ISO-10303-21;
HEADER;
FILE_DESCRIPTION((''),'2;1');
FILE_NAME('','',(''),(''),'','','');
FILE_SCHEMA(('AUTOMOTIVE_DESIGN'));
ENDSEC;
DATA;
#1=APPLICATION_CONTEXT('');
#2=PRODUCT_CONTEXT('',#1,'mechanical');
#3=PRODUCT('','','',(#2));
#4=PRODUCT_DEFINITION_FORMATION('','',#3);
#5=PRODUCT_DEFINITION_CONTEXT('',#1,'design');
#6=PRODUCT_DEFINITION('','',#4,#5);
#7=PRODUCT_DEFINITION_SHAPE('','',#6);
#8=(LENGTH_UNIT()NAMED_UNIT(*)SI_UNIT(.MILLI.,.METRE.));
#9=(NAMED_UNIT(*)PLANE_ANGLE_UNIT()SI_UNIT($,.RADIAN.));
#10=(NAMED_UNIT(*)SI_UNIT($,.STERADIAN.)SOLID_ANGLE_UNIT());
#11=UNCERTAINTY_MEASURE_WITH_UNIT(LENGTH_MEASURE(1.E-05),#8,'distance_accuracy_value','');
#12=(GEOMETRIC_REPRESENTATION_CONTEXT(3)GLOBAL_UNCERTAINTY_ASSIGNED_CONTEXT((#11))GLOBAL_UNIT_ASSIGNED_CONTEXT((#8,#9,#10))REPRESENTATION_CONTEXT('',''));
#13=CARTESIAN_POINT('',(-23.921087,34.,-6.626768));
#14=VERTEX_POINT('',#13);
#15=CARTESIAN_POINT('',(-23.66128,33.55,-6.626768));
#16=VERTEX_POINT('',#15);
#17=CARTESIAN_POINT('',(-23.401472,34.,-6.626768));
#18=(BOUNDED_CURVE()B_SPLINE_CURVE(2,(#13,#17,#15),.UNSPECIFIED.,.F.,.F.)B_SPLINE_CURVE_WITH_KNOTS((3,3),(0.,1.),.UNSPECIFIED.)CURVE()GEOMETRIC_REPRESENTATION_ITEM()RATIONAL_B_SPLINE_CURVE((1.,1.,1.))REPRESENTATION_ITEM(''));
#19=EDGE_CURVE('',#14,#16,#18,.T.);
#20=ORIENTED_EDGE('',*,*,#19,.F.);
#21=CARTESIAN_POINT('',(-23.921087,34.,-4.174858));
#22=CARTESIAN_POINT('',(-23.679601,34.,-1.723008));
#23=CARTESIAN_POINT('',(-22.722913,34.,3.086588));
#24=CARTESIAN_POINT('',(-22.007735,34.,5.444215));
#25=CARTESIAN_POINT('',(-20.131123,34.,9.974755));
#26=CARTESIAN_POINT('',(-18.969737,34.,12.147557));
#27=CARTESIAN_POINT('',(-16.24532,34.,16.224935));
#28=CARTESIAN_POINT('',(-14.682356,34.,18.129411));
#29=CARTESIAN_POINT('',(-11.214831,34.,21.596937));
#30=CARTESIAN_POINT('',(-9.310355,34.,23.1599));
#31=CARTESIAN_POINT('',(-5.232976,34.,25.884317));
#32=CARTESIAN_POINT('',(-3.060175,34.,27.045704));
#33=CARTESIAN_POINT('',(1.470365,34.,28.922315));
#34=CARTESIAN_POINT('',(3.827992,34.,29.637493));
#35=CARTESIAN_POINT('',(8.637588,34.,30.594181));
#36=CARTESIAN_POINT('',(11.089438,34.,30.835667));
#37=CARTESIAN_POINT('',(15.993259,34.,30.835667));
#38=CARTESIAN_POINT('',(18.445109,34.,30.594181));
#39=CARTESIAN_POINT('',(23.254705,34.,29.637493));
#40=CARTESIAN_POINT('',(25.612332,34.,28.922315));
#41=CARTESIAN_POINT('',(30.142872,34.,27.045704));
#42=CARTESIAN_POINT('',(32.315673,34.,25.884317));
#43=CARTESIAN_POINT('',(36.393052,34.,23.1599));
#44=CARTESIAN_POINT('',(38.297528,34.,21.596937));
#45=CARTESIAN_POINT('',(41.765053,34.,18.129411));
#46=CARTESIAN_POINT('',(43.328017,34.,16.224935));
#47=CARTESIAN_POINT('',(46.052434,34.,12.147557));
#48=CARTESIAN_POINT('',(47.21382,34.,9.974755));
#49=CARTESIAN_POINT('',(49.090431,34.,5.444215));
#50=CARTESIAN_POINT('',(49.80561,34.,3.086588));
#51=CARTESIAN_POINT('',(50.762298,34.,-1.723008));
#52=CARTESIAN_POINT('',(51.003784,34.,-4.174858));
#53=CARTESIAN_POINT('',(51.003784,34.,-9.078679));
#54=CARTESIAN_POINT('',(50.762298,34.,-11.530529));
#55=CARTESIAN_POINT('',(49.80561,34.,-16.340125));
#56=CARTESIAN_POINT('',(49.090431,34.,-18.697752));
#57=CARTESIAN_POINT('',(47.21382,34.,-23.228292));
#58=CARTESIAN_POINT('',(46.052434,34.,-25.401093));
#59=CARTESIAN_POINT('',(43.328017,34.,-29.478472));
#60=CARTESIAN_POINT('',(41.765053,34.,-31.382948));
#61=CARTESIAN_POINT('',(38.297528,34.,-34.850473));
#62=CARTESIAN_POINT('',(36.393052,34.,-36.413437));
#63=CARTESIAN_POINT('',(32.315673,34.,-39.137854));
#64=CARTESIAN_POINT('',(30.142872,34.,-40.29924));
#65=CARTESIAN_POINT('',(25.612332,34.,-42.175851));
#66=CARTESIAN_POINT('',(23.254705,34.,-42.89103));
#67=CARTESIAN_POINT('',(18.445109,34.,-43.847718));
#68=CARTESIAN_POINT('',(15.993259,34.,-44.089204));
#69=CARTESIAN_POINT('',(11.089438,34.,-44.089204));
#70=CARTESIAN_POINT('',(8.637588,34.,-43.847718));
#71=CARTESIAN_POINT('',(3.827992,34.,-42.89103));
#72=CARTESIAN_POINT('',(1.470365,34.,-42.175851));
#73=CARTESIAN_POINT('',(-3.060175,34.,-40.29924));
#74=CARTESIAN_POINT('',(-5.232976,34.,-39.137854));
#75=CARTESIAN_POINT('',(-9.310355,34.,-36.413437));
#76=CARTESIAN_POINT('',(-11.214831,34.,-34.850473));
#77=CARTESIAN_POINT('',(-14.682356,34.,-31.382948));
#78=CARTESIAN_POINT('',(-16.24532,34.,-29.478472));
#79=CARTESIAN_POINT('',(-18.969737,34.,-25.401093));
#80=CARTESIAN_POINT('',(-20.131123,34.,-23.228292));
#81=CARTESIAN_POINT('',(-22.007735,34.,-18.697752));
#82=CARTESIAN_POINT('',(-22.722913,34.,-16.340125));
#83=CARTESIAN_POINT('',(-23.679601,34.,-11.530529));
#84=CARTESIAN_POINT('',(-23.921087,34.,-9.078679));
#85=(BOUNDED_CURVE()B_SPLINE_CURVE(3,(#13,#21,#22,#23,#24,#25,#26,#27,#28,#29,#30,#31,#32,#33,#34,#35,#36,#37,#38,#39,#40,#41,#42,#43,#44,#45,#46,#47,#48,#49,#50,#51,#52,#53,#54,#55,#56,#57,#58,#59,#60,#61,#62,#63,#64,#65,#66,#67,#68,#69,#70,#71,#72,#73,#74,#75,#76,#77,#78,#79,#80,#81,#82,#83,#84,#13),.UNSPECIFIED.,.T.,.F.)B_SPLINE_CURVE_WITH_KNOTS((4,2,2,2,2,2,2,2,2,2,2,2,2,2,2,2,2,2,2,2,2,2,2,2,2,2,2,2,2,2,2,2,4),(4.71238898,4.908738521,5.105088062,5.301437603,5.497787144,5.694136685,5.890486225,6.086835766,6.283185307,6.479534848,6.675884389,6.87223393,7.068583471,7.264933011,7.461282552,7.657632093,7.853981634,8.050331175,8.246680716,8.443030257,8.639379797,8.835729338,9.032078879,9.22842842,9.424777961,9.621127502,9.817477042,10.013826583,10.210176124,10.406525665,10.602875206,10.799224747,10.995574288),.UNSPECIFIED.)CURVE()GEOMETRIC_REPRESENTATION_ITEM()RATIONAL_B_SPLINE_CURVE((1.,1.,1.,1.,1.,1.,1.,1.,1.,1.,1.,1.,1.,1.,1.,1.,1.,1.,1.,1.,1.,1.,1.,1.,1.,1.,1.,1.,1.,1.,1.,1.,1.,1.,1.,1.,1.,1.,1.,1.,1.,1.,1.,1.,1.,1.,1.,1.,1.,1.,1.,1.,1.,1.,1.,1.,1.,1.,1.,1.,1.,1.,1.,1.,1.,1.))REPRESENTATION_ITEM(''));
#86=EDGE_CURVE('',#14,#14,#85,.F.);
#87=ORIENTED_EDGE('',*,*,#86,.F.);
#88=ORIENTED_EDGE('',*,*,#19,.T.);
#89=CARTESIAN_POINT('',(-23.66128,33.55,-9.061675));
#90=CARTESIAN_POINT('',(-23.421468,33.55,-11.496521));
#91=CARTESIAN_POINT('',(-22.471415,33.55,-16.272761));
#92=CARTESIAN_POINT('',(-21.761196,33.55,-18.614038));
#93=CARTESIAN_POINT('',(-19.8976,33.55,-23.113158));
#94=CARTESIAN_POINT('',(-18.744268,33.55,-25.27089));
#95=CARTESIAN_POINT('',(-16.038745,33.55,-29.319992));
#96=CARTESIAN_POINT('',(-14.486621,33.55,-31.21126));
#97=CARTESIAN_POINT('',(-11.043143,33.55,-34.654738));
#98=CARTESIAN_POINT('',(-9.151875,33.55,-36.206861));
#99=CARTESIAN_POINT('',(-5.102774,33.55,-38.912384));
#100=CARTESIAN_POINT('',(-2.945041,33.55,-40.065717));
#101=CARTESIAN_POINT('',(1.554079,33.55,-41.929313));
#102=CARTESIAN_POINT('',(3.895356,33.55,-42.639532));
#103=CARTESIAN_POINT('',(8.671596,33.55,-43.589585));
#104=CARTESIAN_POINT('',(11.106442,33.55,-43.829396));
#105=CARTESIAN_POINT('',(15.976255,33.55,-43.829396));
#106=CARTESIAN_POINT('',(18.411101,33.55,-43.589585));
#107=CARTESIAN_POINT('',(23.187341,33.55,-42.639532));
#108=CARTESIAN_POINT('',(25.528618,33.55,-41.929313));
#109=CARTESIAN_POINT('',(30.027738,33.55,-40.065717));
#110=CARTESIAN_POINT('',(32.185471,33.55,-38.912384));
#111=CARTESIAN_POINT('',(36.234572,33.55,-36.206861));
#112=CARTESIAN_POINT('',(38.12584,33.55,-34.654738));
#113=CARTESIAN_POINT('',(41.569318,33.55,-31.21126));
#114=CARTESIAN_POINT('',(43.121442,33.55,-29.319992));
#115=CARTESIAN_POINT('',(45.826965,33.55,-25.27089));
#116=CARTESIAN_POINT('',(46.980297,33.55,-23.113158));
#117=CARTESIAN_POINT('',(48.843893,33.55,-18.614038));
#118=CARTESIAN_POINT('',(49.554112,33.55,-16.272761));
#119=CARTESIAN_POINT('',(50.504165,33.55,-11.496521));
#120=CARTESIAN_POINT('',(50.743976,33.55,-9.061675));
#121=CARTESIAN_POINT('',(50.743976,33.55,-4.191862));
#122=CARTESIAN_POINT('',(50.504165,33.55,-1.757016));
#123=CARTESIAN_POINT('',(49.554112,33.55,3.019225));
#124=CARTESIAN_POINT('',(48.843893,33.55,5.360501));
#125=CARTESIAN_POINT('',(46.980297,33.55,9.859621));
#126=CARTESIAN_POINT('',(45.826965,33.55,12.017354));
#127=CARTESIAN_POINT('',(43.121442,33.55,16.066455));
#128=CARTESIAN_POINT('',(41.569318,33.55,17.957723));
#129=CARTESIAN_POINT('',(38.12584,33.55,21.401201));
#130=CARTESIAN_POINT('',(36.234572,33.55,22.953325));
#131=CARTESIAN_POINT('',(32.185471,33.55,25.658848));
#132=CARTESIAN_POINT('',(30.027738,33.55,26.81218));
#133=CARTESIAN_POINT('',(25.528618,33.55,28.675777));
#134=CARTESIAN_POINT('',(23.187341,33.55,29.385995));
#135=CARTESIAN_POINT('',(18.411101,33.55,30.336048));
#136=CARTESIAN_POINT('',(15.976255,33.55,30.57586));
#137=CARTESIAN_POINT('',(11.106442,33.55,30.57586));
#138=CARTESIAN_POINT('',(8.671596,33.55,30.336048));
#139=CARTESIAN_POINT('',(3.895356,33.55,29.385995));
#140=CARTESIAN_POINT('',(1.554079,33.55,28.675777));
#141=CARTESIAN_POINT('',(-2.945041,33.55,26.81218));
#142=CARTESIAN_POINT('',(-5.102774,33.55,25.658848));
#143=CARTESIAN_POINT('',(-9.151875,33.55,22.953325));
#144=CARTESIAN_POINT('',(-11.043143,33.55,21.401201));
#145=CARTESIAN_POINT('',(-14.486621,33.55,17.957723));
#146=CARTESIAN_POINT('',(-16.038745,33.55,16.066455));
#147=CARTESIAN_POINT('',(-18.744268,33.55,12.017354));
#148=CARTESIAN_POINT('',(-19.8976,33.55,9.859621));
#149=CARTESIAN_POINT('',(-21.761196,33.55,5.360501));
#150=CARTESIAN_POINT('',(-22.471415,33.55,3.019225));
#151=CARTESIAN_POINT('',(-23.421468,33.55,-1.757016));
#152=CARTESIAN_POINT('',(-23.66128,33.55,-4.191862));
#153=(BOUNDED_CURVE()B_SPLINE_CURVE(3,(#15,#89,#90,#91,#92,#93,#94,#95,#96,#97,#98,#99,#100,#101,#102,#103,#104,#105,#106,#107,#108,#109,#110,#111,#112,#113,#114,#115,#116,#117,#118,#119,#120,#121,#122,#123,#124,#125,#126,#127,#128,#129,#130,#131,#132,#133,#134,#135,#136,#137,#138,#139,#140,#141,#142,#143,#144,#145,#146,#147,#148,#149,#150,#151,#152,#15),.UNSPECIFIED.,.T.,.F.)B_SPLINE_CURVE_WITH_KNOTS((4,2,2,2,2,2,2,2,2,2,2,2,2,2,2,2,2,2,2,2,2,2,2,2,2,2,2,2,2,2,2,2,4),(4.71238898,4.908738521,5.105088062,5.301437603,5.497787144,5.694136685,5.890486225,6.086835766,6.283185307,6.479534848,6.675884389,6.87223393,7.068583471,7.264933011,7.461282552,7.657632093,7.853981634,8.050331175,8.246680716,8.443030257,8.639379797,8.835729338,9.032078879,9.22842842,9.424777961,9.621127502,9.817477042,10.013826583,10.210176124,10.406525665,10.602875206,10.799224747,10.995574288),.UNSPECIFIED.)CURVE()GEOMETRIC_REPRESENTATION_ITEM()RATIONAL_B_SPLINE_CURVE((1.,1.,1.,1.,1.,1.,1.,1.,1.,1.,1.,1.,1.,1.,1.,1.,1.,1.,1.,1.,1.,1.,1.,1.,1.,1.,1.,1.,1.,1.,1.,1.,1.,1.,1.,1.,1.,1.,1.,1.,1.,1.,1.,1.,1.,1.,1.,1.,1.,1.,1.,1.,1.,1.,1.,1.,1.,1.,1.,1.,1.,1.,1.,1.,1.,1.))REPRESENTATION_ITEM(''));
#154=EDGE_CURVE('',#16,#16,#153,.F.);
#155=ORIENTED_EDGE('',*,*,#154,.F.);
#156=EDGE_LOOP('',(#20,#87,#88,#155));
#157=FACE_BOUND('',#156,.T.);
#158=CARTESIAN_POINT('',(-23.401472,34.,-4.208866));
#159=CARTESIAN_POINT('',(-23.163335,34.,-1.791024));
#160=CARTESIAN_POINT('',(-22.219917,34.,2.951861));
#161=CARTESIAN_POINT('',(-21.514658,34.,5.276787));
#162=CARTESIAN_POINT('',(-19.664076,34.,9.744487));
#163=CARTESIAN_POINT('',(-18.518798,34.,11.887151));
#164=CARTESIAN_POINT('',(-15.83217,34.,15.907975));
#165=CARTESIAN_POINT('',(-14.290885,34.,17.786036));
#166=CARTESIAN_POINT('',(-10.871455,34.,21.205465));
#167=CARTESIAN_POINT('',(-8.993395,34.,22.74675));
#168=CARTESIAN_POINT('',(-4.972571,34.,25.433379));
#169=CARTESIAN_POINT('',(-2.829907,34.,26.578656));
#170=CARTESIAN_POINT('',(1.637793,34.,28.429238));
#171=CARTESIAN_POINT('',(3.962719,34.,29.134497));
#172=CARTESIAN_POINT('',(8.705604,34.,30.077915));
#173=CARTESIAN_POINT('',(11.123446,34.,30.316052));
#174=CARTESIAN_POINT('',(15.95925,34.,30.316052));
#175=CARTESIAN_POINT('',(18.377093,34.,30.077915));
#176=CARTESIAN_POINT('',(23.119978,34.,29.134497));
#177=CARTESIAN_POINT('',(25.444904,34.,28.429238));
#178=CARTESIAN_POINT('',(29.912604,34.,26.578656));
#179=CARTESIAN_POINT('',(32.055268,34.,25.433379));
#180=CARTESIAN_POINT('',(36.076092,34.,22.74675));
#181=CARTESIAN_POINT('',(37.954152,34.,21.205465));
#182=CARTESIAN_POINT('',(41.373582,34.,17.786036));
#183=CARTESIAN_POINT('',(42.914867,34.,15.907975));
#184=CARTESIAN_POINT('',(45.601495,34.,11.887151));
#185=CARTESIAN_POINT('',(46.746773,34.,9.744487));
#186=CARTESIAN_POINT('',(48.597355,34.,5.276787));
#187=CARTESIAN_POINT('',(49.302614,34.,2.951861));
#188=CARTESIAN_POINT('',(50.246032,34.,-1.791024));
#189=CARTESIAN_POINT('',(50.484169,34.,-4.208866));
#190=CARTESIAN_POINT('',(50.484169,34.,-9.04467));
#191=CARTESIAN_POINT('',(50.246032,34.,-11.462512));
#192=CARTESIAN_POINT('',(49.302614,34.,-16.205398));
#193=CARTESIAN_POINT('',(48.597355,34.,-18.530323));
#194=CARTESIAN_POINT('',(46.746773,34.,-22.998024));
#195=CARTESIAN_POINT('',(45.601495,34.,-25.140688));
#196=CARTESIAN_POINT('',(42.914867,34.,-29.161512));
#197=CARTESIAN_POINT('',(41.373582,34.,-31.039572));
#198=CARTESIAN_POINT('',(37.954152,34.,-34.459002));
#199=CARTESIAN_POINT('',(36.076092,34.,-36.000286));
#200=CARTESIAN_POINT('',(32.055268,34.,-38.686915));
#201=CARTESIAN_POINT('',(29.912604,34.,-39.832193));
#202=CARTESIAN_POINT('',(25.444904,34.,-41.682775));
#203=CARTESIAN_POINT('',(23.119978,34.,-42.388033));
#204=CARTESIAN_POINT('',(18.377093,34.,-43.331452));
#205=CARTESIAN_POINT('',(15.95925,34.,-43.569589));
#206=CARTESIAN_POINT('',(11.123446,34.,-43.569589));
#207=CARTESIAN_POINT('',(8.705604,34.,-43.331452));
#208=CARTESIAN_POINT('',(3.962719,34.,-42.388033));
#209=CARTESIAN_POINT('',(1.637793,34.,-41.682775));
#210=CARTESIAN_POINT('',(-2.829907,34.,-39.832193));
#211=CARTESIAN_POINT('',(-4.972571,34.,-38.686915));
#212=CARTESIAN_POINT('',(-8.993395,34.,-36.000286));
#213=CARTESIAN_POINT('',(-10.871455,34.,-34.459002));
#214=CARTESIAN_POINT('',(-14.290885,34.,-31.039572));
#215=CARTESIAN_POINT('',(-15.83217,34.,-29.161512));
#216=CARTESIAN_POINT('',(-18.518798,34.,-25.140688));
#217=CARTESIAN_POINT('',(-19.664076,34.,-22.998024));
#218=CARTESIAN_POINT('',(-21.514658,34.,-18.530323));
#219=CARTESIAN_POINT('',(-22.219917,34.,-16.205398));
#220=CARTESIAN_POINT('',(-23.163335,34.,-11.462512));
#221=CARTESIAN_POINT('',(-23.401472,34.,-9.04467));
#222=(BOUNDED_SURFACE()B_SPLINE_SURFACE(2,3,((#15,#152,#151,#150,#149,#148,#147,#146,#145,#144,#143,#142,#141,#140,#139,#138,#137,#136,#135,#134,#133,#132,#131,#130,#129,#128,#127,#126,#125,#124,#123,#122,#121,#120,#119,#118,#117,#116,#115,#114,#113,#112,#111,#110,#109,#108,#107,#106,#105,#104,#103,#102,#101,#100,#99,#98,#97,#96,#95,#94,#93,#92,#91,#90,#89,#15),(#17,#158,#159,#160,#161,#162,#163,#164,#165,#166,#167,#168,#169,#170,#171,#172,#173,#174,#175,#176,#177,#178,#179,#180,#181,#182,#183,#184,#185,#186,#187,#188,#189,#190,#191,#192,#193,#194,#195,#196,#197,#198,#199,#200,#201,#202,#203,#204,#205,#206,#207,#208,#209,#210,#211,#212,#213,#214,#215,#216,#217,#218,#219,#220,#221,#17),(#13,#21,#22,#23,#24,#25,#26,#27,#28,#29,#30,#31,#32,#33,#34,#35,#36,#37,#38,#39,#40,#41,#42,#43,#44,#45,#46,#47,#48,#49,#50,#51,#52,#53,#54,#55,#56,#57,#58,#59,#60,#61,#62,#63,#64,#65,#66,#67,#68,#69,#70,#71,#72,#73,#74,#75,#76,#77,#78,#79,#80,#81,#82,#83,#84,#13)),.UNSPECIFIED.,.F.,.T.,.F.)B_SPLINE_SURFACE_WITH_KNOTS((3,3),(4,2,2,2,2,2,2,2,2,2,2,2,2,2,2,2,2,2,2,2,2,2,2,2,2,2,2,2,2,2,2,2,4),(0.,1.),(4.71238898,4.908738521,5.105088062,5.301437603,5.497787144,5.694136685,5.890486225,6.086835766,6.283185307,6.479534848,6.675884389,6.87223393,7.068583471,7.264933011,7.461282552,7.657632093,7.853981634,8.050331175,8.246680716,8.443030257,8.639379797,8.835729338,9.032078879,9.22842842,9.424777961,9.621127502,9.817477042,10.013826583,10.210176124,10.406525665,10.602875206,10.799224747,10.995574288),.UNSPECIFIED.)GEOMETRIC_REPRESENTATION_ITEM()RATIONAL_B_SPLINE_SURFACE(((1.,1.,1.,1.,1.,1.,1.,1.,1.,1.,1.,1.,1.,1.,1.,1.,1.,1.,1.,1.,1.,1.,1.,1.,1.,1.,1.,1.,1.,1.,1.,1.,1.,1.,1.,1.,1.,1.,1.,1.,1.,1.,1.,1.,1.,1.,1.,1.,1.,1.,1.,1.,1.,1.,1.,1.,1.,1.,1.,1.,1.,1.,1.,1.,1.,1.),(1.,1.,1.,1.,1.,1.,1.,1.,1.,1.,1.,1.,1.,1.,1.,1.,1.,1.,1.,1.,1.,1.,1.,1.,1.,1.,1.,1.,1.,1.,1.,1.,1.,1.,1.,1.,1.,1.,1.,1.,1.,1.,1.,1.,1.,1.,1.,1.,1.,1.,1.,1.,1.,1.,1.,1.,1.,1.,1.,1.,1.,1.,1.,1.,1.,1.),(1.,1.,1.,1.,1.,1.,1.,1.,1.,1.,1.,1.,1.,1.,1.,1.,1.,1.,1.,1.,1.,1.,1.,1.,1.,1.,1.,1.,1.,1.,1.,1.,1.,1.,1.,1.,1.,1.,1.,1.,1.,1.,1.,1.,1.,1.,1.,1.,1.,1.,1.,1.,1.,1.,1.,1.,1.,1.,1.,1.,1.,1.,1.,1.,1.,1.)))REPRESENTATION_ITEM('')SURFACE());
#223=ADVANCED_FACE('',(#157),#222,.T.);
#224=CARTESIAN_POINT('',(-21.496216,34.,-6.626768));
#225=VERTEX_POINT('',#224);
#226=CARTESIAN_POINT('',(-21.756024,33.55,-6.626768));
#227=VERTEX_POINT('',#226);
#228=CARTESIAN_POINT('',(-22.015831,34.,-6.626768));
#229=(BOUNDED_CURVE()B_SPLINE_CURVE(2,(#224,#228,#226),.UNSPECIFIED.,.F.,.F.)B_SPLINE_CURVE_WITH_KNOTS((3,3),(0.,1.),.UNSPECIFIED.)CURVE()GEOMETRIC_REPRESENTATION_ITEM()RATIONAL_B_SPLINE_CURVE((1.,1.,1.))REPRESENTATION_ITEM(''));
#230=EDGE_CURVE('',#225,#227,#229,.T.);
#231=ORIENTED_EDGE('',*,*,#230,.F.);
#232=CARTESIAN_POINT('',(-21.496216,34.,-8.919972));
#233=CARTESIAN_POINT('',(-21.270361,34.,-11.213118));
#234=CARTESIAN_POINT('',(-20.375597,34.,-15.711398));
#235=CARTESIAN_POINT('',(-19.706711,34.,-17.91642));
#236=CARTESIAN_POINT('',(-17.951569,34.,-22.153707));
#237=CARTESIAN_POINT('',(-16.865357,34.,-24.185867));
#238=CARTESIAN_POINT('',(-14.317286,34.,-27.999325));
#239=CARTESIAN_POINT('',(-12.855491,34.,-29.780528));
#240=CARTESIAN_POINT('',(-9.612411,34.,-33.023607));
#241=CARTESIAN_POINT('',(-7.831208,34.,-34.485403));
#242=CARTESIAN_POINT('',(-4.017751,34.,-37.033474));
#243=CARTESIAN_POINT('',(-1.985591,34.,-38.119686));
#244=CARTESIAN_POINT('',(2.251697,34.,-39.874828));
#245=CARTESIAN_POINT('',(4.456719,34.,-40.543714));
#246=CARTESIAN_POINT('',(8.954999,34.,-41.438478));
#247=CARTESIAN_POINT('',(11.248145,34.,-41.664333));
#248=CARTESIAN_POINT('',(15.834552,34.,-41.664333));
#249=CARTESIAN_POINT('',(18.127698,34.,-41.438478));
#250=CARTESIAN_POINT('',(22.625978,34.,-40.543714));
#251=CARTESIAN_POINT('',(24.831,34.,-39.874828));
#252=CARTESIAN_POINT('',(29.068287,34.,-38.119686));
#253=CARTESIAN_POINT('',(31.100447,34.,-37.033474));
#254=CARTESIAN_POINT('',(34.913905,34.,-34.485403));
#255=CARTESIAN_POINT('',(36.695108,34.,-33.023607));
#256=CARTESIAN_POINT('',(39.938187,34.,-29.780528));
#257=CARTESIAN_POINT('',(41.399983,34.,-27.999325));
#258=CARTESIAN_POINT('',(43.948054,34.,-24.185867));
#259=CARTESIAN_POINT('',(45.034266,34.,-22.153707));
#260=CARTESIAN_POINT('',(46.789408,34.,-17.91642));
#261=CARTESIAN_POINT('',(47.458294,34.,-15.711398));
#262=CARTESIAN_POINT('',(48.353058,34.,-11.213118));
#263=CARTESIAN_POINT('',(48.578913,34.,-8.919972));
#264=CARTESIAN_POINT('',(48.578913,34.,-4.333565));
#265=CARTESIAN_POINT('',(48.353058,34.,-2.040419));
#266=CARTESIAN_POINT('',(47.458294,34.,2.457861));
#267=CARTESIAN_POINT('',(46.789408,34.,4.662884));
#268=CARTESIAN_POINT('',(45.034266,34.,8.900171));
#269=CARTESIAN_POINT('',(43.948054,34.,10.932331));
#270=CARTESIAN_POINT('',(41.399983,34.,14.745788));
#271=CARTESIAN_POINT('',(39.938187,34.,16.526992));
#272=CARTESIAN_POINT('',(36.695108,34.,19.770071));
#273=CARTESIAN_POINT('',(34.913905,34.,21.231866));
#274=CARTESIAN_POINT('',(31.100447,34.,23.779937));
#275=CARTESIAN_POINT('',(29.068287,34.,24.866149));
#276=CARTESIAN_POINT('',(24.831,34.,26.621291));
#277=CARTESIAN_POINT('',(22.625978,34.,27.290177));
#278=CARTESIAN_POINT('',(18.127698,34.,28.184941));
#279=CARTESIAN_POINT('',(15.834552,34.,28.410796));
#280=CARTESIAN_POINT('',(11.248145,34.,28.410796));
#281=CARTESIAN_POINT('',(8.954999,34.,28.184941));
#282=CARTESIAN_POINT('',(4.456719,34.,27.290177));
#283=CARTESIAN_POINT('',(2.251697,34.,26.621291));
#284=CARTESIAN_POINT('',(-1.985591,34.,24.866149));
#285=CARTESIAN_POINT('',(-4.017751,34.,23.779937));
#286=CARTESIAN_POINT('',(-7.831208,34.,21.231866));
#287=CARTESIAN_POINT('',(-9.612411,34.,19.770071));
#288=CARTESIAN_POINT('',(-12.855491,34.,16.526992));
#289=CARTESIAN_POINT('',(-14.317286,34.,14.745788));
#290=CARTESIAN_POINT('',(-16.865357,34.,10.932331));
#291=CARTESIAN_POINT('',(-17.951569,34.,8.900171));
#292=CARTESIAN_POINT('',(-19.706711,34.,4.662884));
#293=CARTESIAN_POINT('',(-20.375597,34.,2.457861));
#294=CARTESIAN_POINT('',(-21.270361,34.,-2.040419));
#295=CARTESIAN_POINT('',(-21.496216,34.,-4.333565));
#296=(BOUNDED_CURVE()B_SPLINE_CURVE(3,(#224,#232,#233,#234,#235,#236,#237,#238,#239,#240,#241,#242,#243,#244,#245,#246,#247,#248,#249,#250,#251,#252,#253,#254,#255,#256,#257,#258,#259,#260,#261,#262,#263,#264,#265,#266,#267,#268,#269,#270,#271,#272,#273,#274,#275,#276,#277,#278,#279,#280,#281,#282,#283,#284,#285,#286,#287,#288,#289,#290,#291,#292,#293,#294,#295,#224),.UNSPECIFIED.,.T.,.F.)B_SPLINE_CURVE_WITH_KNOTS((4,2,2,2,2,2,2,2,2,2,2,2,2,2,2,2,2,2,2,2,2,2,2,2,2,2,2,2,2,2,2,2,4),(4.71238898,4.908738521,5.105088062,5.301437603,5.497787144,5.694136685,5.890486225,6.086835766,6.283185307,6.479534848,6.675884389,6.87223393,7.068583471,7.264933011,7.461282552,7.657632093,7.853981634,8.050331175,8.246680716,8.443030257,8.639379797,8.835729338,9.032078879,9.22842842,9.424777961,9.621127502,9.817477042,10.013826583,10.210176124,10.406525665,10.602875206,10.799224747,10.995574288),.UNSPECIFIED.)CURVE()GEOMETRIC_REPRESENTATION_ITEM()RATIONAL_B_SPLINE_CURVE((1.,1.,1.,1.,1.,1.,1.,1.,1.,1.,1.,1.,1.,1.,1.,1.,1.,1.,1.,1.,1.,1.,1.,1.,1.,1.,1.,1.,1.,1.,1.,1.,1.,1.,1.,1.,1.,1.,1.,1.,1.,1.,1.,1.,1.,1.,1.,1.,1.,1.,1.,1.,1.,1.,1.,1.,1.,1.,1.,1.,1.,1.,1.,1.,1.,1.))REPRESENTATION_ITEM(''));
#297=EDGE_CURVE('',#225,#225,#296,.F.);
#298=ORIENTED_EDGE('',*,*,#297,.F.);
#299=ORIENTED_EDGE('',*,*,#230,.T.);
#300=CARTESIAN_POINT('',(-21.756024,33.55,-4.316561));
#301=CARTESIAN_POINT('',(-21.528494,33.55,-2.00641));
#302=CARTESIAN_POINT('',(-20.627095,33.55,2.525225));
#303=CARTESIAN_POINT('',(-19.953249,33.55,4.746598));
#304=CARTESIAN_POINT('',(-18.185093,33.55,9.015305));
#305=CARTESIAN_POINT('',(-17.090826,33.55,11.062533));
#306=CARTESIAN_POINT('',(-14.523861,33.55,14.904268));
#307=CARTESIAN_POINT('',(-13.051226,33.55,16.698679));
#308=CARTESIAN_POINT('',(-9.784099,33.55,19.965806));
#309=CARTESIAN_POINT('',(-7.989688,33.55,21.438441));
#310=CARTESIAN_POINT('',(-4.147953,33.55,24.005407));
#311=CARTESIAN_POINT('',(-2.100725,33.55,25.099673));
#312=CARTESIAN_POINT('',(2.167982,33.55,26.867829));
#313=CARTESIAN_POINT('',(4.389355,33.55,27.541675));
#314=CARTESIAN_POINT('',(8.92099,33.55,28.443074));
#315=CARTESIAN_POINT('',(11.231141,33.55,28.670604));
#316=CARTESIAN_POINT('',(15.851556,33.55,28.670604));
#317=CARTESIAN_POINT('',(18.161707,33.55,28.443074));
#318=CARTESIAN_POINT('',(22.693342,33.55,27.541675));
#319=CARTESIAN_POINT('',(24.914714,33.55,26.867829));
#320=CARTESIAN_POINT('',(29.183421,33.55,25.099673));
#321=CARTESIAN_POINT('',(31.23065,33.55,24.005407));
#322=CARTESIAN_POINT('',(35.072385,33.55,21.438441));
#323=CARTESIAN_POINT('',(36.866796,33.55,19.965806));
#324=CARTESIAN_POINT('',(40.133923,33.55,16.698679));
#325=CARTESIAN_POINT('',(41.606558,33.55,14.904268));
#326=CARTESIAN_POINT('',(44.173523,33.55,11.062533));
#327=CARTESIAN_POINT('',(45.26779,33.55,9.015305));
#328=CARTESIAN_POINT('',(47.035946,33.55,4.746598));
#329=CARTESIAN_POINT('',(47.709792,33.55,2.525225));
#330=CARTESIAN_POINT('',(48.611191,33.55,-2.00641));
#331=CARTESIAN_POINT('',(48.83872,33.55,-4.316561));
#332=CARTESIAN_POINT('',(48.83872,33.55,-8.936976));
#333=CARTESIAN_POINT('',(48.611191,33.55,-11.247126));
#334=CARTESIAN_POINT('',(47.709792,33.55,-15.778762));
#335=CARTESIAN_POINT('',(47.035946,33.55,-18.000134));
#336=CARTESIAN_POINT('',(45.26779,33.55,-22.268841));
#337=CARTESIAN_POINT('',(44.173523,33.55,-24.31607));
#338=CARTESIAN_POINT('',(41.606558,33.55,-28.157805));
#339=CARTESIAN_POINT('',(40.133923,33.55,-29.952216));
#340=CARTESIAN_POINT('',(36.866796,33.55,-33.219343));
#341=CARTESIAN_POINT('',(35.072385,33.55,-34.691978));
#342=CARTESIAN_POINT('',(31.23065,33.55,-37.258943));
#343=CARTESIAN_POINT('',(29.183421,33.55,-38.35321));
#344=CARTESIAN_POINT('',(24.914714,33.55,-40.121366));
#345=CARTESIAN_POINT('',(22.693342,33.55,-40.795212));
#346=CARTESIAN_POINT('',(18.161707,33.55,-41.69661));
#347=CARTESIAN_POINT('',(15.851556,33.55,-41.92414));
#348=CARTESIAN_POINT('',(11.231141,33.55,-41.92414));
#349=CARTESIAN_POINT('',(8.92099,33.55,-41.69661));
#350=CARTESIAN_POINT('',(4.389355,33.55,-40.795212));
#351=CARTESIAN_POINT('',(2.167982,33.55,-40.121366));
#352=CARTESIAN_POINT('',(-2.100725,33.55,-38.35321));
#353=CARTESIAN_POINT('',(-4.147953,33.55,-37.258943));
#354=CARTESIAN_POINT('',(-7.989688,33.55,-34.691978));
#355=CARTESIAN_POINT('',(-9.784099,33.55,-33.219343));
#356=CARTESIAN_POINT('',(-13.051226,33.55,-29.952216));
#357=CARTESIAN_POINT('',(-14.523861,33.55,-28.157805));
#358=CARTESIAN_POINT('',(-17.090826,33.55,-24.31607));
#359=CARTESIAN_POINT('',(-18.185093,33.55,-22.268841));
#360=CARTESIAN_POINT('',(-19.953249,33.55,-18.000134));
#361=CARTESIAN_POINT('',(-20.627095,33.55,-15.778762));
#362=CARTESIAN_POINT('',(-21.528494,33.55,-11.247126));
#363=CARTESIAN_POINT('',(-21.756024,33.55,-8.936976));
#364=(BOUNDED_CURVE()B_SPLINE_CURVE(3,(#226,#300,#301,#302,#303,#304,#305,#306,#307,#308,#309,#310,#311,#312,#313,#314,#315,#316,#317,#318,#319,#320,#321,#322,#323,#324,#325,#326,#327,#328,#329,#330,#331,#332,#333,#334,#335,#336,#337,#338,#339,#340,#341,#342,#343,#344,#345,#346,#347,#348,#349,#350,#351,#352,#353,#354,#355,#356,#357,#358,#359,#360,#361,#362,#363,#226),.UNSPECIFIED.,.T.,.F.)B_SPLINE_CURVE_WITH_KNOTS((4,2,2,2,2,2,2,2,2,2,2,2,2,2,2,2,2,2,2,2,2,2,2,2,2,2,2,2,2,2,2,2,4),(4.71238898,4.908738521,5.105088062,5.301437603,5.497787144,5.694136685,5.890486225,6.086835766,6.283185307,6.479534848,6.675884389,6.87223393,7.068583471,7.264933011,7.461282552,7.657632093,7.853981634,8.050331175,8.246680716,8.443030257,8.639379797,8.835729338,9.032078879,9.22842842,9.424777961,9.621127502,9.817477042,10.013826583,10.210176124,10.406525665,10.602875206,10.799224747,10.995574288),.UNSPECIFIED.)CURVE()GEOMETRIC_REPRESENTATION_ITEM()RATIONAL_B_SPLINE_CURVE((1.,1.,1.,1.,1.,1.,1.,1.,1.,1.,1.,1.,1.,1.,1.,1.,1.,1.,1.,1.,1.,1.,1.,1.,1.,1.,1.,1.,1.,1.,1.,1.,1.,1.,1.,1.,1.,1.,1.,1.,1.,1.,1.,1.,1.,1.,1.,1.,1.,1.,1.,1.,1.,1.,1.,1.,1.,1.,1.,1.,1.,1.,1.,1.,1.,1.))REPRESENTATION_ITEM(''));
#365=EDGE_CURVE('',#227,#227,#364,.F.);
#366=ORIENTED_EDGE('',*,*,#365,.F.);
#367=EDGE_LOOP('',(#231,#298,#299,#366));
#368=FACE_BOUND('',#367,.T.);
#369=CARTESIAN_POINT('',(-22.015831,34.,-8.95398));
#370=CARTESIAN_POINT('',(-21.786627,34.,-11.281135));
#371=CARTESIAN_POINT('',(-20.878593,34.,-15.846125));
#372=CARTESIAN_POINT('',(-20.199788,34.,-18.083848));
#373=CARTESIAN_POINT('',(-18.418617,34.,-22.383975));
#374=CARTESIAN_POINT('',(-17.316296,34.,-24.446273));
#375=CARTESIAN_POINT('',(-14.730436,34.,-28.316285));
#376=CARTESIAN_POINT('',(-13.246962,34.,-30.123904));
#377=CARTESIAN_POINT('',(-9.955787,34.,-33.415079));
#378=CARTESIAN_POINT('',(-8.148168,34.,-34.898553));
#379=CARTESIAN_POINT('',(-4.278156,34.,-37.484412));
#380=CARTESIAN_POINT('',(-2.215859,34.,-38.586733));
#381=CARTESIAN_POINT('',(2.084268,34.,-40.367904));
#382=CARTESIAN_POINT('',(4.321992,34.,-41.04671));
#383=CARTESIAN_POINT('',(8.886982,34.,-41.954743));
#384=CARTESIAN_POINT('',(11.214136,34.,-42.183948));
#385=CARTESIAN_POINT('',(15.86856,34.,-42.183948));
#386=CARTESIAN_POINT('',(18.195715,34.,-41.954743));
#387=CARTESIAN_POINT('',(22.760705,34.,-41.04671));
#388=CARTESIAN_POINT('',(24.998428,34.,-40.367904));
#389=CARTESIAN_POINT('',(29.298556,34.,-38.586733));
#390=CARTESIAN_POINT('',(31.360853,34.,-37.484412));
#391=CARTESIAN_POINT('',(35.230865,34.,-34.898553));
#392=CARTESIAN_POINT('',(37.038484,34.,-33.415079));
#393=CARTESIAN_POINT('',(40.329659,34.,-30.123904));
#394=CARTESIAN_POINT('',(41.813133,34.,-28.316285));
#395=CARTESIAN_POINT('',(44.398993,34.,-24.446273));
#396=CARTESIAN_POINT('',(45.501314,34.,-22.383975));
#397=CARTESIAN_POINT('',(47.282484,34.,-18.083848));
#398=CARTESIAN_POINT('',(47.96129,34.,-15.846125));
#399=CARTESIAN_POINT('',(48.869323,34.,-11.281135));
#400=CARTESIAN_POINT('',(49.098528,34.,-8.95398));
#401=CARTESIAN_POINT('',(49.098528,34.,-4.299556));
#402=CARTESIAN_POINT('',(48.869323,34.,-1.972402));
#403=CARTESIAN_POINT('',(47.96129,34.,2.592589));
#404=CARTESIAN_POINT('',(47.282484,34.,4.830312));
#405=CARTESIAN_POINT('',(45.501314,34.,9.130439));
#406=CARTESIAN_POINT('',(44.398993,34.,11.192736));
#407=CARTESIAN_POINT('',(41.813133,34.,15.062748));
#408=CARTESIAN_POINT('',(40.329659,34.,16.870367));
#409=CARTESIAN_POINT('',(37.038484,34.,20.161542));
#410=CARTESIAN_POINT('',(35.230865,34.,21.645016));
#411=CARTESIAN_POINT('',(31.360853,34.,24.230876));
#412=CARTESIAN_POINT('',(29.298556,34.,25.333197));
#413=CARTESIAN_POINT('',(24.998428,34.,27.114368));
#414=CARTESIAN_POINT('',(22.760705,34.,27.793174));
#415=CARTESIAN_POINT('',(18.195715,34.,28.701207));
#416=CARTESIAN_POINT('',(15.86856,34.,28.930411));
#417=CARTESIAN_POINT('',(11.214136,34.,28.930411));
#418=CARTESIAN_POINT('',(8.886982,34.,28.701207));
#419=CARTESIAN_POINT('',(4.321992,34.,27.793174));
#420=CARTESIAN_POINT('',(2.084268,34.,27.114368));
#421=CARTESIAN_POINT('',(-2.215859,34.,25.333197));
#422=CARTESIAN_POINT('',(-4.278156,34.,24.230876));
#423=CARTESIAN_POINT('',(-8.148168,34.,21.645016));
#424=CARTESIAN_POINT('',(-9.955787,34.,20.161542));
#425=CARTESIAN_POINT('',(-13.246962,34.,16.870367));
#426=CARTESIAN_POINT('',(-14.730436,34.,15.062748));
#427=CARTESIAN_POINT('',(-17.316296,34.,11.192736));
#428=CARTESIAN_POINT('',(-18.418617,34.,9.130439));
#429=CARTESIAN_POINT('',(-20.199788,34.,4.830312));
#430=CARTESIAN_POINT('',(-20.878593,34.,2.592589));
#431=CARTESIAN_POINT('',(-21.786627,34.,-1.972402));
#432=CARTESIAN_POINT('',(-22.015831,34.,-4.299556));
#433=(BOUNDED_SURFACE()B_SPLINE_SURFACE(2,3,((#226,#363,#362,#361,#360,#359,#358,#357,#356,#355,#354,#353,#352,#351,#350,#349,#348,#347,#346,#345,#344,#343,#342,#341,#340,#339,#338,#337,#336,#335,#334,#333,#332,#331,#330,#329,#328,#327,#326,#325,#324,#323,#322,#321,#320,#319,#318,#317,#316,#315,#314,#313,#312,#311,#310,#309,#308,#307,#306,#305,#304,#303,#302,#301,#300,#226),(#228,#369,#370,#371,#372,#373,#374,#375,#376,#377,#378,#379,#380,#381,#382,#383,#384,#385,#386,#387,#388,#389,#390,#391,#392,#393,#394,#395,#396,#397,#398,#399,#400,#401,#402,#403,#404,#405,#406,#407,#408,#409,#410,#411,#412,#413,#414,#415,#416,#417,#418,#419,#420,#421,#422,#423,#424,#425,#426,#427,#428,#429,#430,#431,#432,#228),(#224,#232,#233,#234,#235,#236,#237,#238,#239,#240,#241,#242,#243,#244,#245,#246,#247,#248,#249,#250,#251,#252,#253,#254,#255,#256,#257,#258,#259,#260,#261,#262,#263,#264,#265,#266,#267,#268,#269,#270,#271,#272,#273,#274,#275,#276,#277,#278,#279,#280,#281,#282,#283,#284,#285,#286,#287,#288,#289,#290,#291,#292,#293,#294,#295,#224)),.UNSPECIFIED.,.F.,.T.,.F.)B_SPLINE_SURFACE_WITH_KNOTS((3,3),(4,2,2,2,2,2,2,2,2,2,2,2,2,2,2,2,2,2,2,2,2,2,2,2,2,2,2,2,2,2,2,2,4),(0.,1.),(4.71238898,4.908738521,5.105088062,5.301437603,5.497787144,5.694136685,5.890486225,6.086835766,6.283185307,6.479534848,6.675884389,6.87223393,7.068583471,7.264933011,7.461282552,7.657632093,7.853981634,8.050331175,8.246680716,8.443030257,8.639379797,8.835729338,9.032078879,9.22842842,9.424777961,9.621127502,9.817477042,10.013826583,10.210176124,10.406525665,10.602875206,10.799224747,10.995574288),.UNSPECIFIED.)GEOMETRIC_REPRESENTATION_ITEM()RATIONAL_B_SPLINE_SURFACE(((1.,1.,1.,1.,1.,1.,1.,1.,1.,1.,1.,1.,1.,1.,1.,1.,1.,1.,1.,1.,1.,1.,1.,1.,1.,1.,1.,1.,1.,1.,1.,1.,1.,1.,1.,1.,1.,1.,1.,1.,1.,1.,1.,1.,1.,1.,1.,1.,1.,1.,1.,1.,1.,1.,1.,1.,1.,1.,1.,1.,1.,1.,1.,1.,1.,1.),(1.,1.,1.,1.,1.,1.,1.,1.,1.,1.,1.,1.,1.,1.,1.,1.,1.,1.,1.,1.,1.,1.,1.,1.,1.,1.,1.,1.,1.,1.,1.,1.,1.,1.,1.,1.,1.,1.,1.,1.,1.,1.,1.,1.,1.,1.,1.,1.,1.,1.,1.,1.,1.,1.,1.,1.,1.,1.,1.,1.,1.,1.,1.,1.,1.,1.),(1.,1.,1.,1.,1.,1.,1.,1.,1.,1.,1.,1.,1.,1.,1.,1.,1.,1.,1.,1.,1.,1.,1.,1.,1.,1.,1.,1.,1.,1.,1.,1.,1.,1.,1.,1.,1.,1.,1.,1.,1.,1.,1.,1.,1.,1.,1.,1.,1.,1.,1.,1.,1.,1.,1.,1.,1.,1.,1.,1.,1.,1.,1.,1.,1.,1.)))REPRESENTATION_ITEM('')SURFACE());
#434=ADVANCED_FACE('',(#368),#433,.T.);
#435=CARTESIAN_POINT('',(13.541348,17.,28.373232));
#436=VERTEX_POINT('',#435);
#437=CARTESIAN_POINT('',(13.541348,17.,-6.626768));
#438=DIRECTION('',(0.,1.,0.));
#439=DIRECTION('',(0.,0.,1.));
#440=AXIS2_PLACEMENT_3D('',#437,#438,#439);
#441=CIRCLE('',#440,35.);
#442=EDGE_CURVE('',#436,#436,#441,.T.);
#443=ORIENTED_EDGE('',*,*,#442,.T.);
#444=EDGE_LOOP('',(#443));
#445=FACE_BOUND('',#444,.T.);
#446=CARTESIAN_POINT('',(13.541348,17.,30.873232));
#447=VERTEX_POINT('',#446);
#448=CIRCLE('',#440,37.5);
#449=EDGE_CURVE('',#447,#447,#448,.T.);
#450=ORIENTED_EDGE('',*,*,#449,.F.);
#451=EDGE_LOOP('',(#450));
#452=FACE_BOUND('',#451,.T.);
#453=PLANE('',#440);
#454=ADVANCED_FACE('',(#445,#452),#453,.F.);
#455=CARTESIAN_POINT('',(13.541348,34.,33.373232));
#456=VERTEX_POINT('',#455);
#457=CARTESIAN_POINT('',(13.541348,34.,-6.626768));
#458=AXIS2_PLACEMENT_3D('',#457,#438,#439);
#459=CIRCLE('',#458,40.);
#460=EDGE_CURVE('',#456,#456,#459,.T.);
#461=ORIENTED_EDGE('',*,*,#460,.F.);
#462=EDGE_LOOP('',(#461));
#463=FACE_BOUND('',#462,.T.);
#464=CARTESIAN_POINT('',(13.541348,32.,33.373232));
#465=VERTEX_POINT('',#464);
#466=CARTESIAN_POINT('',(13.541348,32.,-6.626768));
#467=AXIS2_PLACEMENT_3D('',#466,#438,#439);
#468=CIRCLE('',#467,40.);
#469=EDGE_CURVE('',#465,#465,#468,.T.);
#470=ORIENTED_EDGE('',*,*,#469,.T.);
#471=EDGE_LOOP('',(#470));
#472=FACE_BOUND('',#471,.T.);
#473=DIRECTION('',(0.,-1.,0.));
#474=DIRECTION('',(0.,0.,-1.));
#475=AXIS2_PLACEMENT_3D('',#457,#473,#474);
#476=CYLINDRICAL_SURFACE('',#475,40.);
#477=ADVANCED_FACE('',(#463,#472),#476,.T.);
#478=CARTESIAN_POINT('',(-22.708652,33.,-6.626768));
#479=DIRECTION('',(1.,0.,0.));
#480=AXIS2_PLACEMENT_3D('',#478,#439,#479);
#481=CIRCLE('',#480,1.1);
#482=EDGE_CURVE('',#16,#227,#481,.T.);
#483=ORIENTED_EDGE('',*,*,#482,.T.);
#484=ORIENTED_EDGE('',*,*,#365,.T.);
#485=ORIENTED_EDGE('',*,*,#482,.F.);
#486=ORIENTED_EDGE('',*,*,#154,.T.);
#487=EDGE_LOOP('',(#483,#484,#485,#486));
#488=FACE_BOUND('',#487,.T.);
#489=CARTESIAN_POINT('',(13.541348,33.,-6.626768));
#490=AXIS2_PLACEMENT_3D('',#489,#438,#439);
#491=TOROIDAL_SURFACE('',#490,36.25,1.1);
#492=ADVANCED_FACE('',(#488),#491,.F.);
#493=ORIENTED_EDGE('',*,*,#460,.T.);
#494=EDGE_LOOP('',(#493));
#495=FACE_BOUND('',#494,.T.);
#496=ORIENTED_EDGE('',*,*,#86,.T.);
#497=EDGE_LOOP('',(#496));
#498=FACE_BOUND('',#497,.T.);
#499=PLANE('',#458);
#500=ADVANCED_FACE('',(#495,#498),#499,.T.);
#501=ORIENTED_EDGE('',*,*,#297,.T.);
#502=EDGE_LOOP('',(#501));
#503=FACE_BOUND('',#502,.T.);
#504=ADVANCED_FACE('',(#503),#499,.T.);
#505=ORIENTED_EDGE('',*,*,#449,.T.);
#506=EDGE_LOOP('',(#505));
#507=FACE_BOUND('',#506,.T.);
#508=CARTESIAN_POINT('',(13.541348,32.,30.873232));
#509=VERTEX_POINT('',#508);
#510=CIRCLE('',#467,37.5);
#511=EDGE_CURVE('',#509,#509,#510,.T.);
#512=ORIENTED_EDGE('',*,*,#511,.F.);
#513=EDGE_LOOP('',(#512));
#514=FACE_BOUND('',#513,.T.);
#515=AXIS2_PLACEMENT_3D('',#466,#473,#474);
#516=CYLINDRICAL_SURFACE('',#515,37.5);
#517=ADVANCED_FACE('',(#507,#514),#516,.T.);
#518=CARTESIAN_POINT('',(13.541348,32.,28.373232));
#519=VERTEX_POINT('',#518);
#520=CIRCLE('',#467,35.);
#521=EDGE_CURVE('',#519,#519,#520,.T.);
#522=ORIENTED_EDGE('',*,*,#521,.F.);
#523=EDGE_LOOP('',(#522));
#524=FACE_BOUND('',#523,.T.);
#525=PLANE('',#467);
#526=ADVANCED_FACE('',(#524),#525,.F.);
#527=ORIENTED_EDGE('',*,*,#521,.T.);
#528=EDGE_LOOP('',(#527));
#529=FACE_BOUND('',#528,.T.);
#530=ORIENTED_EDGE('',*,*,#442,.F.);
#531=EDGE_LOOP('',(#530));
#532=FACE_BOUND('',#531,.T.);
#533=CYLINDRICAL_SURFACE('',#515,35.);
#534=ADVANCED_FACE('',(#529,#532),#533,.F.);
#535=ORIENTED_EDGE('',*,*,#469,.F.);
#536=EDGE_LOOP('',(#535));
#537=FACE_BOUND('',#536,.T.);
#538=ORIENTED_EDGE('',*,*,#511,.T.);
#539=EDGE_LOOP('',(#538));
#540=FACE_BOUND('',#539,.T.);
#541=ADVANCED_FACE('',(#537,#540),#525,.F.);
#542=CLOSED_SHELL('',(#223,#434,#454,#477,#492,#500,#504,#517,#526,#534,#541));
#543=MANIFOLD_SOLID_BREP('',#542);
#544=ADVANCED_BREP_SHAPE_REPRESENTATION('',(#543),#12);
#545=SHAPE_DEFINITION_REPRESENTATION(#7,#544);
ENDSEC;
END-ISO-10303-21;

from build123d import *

# Parameters (mm, degrees)
CROQUIS1_R              = 37.5
CROQUIS1_R_2            = 35
SALIENTE_EXTRUIR1_DEPTH = 15
CROQUIS2_R              = 40
SALIENTE_EXTRUIR2_DEPTH = 2
CROQUIS5_R              = 1.1


with BuildPart() as part:
    # Croquis1 → Saliente-Extruir1 (new body)
    with BuildSketch(Plane(origin=(0, 17, 0), x_dir=(1, 0, 0), z_dir=(0, 1, 0))):
        with Locations(Location((13.541348433, 6.626768313, 0), (0, 0, 270))):
            Circle(CROQUIS1_R)
        with Locations(Location((13.541348433, 6.626768313, 0), (0, 0, 270))):
            Circle(CROQUIS1_R_2, mode=Mode.SUBTRACT)
    extrude(amount=SALIENTE_EXTRUIR1_DEPTH)

    # Croquis2 → Saliente-Extruir2 (add)
    with BuildSketch(Plane(origin=(0, 32, 0), x_dir=(1, 0, 0), z_dir=(0, 1, 0))):
        with Locations(Location((13.541348433, 6.626768313, 0), (0, 0, 270))):
            Circle(CROQUIS2_R)
    extrude(amount=SALIENTE_EXTRUIR2_DEPTH)

    # Cortar-Barrer1: sweep along a path in Croquis6
    with BuildLine(Plane(origin=(0, 33, 0), x_dir=(1, 0, 0), z_dir=(0, 1, 0))) as cortar_barrer1_path:
        CenterArc((13.541348433, 6.626768313), 36.25, 0, 360)
    # Croquis5 → Cortar-Barrer1 (sweep, cut)
    with BuildSketch(Plane.XY.offset(-6.626768313)):
        with Locations((-22.708651567, 33)):
            Circle(CROQUIS5_R)
    sweep(path=cortar_barrer1_path.line, mode=Mode.SUBTRACT)

    # Redondeo1
    # a fillet whose section is not a circle: 0.3 mm, written as the material it takes off along each edge
    with BuildSketch(Plane(origin=(13.541348433, 34, -6.626768313), x_dir=(1, 0, 0), z_dir=(0, 0, 1))) as redondeo1_piece_1:
        with BuildLine():
            Bezier((37.462435565, 0), (36.942820323, 0), (37.202627944, -0.45), weights=[1, 1, 1])
            ThreePointArc((37.202627944, -0.45), (36.990455592, -0.186534871), (36.708257569, 0))
            Line((36.708257569, 0), (37.462435565, 0))
        make_face()
    revolve(axis=Axis((13.541348433, 34, -6.626768313), (0, 1, 0)), mode=Mode.SUBTRACT)
    with BuildSketch(Plane(origin=(13.541348433, 34, -6.626768313), x_dir=(1, 0, 0), z_dir=(0, 0, 1))) as redondeo1_piece_2:
        with BuildLine():
            Bezier((35.297372056, -0.45), (35.557179677, 0), (35.037564435, 0), weights=[1, 1, 1])
            Line((35.037564435, 0), (35.791742431, 0))
            ThreePointArc((35.791742431, 0), (35.509544408, -0.186534871), (35.297372056, -0.45))
        make_face()
    revolve(axis=Axis((13.541348433, 34, -6.626768313), (0, 1, 0)), mode=Mode.SUBTRACT)


solid = part.part
